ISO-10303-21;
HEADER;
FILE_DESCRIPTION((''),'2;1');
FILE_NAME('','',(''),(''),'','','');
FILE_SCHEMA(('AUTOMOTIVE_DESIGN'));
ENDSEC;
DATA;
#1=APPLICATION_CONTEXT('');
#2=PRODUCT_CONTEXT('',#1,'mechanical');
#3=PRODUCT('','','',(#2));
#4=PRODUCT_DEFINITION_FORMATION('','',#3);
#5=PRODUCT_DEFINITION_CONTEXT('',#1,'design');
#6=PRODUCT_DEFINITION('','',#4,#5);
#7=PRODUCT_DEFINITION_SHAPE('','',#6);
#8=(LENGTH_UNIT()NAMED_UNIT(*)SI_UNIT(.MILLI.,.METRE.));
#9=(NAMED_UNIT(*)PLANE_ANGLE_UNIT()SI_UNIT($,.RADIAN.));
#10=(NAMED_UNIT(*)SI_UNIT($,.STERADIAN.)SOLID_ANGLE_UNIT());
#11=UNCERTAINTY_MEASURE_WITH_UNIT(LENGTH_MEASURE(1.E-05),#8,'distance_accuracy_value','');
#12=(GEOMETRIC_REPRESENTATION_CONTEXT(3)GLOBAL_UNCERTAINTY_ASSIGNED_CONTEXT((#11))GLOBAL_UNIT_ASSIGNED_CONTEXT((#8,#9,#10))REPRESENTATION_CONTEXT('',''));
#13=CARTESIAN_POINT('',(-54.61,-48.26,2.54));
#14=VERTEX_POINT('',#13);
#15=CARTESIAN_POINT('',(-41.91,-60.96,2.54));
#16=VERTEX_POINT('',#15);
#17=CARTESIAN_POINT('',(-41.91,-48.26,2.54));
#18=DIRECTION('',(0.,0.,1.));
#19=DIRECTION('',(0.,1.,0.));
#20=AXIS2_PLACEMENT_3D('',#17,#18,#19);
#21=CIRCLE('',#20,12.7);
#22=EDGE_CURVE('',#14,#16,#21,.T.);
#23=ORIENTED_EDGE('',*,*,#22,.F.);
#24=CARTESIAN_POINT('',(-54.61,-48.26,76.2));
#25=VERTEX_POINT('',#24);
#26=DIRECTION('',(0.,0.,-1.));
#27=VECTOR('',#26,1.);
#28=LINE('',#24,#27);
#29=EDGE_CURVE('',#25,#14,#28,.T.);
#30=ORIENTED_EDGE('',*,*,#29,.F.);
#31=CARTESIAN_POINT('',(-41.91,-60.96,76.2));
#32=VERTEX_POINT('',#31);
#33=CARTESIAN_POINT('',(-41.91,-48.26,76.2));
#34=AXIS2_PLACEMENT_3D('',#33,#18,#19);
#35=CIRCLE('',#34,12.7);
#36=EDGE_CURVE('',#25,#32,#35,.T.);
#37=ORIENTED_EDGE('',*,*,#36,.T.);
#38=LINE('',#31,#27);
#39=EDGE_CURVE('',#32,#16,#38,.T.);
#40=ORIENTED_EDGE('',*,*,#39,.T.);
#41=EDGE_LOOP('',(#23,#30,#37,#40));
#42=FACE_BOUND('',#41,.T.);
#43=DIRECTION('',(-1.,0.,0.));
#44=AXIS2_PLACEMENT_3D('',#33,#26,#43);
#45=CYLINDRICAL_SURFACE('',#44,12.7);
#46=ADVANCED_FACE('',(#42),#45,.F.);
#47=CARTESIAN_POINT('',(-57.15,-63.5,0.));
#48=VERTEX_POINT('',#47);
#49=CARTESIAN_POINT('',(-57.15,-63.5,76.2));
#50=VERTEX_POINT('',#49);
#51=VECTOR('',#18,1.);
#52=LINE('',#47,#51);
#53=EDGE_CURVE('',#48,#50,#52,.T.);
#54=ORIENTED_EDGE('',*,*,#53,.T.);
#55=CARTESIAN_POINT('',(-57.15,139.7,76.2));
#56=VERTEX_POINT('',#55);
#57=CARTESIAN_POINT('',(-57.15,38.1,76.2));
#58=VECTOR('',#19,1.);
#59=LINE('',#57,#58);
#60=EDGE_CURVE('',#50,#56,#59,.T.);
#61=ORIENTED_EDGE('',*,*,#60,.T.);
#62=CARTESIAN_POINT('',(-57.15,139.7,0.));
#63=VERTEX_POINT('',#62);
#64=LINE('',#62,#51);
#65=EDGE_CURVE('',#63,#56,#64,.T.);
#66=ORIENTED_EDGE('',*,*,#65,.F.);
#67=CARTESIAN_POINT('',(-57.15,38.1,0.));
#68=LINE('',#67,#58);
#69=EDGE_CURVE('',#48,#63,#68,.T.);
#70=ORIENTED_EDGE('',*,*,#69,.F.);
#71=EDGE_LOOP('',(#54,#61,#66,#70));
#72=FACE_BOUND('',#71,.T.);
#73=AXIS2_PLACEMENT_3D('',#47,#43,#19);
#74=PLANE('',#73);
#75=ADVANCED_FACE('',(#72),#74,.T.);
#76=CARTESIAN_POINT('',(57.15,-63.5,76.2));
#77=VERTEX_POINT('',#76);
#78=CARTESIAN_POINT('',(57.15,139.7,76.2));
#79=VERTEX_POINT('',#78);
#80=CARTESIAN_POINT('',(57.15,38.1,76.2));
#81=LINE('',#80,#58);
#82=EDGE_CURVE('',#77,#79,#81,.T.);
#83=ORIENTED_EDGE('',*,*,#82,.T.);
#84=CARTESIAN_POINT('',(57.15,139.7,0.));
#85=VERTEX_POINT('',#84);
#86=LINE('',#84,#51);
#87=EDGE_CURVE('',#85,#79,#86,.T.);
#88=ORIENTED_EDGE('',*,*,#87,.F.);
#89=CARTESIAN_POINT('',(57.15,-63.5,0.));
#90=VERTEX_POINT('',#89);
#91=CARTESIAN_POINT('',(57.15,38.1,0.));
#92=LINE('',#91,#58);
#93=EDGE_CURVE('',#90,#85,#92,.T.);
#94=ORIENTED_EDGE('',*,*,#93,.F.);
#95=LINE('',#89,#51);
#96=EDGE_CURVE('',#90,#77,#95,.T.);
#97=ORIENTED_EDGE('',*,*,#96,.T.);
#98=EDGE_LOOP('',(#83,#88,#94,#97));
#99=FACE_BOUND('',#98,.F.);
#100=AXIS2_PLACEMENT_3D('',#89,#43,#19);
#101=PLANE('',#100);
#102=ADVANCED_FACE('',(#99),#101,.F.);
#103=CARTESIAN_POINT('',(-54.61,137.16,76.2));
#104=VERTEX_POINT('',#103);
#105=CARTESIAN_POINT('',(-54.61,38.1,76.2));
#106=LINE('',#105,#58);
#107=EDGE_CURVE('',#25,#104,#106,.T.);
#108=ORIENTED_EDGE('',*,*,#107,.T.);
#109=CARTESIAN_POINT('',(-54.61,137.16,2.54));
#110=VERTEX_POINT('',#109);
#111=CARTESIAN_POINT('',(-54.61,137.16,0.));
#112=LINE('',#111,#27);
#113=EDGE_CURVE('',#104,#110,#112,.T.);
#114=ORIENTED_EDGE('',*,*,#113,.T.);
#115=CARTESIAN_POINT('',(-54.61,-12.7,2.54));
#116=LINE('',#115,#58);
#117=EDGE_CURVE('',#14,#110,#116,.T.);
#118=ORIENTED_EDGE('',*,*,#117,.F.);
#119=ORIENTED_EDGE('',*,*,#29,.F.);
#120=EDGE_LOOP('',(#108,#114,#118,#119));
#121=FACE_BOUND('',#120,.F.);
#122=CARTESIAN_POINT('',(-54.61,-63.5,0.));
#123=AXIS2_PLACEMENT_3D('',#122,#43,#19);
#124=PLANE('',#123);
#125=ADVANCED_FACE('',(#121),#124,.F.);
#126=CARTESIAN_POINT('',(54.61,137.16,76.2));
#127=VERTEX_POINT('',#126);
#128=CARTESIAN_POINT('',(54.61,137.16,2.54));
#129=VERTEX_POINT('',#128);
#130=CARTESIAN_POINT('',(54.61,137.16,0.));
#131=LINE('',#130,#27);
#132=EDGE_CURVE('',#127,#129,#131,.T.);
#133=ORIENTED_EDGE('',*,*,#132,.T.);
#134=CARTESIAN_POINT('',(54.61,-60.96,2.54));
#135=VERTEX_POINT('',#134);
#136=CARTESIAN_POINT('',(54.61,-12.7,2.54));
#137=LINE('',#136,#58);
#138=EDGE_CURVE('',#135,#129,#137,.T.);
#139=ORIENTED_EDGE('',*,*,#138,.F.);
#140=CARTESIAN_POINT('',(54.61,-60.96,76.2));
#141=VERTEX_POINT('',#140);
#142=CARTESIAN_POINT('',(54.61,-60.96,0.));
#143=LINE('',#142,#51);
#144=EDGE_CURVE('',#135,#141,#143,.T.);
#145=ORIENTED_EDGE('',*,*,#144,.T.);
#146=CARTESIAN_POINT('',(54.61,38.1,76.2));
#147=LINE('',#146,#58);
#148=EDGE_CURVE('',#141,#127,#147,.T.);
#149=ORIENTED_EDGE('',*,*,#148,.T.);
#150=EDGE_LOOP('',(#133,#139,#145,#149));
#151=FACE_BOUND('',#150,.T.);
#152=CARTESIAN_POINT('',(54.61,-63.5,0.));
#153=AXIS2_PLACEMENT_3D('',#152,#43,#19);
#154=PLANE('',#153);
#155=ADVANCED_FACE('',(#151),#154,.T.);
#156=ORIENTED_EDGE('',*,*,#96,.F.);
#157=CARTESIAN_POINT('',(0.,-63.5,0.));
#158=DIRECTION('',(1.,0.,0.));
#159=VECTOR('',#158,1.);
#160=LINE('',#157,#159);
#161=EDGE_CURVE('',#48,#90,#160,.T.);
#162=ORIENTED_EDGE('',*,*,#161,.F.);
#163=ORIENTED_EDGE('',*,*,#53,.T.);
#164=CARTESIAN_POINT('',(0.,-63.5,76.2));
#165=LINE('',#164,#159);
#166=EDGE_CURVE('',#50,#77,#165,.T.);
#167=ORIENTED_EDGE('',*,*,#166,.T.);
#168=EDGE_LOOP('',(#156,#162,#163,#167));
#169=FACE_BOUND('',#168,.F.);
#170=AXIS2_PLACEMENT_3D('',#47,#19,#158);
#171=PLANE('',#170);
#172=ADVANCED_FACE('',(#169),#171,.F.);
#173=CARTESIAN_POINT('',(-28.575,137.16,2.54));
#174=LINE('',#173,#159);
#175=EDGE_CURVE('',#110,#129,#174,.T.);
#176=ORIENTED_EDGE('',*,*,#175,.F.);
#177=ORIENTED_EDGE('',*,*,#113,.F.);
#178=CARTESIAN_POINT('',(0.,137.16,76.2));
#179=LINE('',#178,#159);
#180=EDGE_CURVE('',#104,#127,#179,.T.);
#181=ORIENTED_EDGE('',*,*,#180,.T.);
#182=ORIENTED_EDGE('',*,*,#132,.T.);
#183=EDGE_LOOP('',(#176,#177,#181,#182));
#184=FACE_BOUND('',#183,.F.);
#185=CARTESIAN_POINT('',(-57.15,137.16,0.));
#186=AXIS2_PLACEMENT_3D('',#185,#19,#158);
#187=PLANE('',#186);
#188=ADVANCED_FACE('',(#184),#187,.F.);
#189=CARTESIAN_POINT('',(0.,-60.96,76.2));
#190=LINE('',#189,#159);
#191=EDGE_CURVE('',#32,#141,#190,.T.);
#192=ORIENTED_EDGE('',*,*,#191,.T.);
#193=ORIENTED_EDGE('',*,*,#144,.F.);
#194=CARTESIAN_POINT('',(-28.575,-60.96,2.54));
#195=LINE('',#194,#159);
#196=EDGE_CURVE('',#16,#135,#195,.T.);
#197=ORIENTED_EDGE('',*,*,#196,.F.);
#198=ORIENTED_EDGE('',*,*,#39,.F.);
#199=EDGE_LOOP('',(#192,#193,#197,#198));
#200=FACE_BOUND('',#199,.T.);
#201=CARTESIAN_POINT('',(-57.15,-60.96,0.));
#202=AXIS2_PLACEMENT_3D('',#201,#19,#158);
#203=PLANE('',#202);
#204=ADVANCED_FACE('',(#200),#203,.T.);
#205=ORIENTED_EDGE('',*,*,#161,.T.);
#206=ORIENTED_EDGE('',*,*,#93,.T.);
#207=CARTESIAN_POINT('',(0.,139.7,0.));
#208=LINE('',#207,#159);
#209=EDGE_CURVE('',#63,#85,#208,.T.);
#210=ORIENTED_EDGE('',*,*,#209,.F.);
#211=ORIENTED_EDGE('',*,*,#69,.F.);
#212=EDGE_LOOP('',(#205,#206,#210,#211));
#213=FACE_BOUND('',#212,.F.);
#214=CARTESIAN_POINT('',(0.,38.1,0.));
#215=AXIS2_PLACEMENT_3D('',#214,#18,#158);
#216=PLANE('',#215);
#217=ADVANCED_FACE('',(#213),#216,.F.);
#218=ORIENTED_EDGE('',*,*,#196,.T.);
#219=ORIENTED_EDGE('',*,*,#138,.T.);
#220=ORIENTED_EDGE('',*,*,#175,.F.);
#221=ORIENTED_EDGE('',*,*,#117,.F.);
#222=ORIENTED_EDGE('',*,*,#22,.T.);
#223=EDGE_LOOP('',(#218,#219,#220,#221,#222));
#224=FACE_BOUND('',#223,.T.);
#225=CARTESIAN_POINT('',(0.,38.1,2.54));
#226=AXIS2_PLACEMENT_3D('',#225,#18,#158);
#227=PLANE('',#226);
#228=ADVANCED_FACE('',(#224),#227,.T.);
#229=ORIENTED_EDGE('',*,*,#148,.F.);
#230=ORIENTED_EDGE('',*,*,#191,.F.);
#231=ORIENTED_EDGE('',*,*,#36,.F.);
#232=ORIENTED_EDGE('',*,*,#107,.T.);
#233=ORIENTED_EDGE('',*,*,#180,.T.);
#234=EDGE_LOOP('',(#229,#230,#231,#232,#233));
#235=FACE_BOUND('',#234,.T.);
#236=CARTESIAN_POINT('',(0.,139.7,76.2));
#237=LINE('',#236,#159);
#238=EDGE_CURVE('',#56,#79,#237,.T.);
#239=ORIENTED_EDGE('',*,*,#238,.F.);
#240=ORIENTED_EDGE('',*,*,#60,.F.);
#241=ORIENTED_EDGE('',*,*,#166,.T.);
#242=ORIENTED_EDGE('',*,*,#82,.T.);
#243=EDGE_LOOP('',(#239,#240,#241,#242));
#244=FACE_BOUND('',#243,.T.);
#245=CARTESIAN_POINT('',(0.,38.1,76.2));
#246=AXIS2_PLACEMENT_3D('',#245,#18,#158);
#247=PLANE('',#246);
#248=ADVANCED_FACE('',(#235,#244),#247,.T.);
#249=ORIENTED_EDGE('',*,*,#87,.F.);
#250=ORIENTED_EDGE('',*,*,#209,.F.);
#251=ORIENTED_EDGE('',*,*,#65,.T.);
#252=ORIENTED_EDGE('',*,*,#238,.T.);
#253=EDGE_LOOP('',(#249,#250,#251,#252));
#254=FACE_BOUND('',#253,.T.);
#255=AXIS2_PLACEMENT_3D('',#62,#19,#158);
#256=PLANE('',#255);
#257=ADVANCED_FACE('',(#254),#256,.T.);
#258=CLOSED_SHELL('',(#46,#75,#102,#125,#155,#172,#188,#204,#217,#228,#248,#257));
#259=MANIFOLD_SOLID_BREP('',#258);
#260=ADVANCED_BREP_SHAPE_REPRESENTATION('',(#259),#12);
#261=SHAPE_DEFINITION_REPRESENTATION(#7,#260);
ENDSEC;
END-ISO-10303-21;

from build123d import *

# Parameters (mm, degrees)
F0_W     = 114.3
F0_H     = 203.2
F1_DEPTH = 76.2
F2_T     = -2.54
F3_R     = 12.7


with BuildPart() as f1:
    # F0 (on Top) → F1 (new body)
    with BuildSketch(Plane.XY):
        with Locations((0, 38.1)):
            Rectangle(F0_W, F0_H)
    extrude(amount=F1_DEPTH)

    # F2
    f2_openings = [f1.faces().sort_by_distance(p)[0] for p in [
        (0, 38.1, 76.2),
    ]]
    offset(amount=F2_T, openings=f2_openings)

    # F3
    f3_edges = [f1.edges().sort_by_distance(p)[0] for p in [
        (-54.61, -60.96, 39.37),
    ]]
    fillet(f3_edges, radius=F3_R)


solid = f1.part
